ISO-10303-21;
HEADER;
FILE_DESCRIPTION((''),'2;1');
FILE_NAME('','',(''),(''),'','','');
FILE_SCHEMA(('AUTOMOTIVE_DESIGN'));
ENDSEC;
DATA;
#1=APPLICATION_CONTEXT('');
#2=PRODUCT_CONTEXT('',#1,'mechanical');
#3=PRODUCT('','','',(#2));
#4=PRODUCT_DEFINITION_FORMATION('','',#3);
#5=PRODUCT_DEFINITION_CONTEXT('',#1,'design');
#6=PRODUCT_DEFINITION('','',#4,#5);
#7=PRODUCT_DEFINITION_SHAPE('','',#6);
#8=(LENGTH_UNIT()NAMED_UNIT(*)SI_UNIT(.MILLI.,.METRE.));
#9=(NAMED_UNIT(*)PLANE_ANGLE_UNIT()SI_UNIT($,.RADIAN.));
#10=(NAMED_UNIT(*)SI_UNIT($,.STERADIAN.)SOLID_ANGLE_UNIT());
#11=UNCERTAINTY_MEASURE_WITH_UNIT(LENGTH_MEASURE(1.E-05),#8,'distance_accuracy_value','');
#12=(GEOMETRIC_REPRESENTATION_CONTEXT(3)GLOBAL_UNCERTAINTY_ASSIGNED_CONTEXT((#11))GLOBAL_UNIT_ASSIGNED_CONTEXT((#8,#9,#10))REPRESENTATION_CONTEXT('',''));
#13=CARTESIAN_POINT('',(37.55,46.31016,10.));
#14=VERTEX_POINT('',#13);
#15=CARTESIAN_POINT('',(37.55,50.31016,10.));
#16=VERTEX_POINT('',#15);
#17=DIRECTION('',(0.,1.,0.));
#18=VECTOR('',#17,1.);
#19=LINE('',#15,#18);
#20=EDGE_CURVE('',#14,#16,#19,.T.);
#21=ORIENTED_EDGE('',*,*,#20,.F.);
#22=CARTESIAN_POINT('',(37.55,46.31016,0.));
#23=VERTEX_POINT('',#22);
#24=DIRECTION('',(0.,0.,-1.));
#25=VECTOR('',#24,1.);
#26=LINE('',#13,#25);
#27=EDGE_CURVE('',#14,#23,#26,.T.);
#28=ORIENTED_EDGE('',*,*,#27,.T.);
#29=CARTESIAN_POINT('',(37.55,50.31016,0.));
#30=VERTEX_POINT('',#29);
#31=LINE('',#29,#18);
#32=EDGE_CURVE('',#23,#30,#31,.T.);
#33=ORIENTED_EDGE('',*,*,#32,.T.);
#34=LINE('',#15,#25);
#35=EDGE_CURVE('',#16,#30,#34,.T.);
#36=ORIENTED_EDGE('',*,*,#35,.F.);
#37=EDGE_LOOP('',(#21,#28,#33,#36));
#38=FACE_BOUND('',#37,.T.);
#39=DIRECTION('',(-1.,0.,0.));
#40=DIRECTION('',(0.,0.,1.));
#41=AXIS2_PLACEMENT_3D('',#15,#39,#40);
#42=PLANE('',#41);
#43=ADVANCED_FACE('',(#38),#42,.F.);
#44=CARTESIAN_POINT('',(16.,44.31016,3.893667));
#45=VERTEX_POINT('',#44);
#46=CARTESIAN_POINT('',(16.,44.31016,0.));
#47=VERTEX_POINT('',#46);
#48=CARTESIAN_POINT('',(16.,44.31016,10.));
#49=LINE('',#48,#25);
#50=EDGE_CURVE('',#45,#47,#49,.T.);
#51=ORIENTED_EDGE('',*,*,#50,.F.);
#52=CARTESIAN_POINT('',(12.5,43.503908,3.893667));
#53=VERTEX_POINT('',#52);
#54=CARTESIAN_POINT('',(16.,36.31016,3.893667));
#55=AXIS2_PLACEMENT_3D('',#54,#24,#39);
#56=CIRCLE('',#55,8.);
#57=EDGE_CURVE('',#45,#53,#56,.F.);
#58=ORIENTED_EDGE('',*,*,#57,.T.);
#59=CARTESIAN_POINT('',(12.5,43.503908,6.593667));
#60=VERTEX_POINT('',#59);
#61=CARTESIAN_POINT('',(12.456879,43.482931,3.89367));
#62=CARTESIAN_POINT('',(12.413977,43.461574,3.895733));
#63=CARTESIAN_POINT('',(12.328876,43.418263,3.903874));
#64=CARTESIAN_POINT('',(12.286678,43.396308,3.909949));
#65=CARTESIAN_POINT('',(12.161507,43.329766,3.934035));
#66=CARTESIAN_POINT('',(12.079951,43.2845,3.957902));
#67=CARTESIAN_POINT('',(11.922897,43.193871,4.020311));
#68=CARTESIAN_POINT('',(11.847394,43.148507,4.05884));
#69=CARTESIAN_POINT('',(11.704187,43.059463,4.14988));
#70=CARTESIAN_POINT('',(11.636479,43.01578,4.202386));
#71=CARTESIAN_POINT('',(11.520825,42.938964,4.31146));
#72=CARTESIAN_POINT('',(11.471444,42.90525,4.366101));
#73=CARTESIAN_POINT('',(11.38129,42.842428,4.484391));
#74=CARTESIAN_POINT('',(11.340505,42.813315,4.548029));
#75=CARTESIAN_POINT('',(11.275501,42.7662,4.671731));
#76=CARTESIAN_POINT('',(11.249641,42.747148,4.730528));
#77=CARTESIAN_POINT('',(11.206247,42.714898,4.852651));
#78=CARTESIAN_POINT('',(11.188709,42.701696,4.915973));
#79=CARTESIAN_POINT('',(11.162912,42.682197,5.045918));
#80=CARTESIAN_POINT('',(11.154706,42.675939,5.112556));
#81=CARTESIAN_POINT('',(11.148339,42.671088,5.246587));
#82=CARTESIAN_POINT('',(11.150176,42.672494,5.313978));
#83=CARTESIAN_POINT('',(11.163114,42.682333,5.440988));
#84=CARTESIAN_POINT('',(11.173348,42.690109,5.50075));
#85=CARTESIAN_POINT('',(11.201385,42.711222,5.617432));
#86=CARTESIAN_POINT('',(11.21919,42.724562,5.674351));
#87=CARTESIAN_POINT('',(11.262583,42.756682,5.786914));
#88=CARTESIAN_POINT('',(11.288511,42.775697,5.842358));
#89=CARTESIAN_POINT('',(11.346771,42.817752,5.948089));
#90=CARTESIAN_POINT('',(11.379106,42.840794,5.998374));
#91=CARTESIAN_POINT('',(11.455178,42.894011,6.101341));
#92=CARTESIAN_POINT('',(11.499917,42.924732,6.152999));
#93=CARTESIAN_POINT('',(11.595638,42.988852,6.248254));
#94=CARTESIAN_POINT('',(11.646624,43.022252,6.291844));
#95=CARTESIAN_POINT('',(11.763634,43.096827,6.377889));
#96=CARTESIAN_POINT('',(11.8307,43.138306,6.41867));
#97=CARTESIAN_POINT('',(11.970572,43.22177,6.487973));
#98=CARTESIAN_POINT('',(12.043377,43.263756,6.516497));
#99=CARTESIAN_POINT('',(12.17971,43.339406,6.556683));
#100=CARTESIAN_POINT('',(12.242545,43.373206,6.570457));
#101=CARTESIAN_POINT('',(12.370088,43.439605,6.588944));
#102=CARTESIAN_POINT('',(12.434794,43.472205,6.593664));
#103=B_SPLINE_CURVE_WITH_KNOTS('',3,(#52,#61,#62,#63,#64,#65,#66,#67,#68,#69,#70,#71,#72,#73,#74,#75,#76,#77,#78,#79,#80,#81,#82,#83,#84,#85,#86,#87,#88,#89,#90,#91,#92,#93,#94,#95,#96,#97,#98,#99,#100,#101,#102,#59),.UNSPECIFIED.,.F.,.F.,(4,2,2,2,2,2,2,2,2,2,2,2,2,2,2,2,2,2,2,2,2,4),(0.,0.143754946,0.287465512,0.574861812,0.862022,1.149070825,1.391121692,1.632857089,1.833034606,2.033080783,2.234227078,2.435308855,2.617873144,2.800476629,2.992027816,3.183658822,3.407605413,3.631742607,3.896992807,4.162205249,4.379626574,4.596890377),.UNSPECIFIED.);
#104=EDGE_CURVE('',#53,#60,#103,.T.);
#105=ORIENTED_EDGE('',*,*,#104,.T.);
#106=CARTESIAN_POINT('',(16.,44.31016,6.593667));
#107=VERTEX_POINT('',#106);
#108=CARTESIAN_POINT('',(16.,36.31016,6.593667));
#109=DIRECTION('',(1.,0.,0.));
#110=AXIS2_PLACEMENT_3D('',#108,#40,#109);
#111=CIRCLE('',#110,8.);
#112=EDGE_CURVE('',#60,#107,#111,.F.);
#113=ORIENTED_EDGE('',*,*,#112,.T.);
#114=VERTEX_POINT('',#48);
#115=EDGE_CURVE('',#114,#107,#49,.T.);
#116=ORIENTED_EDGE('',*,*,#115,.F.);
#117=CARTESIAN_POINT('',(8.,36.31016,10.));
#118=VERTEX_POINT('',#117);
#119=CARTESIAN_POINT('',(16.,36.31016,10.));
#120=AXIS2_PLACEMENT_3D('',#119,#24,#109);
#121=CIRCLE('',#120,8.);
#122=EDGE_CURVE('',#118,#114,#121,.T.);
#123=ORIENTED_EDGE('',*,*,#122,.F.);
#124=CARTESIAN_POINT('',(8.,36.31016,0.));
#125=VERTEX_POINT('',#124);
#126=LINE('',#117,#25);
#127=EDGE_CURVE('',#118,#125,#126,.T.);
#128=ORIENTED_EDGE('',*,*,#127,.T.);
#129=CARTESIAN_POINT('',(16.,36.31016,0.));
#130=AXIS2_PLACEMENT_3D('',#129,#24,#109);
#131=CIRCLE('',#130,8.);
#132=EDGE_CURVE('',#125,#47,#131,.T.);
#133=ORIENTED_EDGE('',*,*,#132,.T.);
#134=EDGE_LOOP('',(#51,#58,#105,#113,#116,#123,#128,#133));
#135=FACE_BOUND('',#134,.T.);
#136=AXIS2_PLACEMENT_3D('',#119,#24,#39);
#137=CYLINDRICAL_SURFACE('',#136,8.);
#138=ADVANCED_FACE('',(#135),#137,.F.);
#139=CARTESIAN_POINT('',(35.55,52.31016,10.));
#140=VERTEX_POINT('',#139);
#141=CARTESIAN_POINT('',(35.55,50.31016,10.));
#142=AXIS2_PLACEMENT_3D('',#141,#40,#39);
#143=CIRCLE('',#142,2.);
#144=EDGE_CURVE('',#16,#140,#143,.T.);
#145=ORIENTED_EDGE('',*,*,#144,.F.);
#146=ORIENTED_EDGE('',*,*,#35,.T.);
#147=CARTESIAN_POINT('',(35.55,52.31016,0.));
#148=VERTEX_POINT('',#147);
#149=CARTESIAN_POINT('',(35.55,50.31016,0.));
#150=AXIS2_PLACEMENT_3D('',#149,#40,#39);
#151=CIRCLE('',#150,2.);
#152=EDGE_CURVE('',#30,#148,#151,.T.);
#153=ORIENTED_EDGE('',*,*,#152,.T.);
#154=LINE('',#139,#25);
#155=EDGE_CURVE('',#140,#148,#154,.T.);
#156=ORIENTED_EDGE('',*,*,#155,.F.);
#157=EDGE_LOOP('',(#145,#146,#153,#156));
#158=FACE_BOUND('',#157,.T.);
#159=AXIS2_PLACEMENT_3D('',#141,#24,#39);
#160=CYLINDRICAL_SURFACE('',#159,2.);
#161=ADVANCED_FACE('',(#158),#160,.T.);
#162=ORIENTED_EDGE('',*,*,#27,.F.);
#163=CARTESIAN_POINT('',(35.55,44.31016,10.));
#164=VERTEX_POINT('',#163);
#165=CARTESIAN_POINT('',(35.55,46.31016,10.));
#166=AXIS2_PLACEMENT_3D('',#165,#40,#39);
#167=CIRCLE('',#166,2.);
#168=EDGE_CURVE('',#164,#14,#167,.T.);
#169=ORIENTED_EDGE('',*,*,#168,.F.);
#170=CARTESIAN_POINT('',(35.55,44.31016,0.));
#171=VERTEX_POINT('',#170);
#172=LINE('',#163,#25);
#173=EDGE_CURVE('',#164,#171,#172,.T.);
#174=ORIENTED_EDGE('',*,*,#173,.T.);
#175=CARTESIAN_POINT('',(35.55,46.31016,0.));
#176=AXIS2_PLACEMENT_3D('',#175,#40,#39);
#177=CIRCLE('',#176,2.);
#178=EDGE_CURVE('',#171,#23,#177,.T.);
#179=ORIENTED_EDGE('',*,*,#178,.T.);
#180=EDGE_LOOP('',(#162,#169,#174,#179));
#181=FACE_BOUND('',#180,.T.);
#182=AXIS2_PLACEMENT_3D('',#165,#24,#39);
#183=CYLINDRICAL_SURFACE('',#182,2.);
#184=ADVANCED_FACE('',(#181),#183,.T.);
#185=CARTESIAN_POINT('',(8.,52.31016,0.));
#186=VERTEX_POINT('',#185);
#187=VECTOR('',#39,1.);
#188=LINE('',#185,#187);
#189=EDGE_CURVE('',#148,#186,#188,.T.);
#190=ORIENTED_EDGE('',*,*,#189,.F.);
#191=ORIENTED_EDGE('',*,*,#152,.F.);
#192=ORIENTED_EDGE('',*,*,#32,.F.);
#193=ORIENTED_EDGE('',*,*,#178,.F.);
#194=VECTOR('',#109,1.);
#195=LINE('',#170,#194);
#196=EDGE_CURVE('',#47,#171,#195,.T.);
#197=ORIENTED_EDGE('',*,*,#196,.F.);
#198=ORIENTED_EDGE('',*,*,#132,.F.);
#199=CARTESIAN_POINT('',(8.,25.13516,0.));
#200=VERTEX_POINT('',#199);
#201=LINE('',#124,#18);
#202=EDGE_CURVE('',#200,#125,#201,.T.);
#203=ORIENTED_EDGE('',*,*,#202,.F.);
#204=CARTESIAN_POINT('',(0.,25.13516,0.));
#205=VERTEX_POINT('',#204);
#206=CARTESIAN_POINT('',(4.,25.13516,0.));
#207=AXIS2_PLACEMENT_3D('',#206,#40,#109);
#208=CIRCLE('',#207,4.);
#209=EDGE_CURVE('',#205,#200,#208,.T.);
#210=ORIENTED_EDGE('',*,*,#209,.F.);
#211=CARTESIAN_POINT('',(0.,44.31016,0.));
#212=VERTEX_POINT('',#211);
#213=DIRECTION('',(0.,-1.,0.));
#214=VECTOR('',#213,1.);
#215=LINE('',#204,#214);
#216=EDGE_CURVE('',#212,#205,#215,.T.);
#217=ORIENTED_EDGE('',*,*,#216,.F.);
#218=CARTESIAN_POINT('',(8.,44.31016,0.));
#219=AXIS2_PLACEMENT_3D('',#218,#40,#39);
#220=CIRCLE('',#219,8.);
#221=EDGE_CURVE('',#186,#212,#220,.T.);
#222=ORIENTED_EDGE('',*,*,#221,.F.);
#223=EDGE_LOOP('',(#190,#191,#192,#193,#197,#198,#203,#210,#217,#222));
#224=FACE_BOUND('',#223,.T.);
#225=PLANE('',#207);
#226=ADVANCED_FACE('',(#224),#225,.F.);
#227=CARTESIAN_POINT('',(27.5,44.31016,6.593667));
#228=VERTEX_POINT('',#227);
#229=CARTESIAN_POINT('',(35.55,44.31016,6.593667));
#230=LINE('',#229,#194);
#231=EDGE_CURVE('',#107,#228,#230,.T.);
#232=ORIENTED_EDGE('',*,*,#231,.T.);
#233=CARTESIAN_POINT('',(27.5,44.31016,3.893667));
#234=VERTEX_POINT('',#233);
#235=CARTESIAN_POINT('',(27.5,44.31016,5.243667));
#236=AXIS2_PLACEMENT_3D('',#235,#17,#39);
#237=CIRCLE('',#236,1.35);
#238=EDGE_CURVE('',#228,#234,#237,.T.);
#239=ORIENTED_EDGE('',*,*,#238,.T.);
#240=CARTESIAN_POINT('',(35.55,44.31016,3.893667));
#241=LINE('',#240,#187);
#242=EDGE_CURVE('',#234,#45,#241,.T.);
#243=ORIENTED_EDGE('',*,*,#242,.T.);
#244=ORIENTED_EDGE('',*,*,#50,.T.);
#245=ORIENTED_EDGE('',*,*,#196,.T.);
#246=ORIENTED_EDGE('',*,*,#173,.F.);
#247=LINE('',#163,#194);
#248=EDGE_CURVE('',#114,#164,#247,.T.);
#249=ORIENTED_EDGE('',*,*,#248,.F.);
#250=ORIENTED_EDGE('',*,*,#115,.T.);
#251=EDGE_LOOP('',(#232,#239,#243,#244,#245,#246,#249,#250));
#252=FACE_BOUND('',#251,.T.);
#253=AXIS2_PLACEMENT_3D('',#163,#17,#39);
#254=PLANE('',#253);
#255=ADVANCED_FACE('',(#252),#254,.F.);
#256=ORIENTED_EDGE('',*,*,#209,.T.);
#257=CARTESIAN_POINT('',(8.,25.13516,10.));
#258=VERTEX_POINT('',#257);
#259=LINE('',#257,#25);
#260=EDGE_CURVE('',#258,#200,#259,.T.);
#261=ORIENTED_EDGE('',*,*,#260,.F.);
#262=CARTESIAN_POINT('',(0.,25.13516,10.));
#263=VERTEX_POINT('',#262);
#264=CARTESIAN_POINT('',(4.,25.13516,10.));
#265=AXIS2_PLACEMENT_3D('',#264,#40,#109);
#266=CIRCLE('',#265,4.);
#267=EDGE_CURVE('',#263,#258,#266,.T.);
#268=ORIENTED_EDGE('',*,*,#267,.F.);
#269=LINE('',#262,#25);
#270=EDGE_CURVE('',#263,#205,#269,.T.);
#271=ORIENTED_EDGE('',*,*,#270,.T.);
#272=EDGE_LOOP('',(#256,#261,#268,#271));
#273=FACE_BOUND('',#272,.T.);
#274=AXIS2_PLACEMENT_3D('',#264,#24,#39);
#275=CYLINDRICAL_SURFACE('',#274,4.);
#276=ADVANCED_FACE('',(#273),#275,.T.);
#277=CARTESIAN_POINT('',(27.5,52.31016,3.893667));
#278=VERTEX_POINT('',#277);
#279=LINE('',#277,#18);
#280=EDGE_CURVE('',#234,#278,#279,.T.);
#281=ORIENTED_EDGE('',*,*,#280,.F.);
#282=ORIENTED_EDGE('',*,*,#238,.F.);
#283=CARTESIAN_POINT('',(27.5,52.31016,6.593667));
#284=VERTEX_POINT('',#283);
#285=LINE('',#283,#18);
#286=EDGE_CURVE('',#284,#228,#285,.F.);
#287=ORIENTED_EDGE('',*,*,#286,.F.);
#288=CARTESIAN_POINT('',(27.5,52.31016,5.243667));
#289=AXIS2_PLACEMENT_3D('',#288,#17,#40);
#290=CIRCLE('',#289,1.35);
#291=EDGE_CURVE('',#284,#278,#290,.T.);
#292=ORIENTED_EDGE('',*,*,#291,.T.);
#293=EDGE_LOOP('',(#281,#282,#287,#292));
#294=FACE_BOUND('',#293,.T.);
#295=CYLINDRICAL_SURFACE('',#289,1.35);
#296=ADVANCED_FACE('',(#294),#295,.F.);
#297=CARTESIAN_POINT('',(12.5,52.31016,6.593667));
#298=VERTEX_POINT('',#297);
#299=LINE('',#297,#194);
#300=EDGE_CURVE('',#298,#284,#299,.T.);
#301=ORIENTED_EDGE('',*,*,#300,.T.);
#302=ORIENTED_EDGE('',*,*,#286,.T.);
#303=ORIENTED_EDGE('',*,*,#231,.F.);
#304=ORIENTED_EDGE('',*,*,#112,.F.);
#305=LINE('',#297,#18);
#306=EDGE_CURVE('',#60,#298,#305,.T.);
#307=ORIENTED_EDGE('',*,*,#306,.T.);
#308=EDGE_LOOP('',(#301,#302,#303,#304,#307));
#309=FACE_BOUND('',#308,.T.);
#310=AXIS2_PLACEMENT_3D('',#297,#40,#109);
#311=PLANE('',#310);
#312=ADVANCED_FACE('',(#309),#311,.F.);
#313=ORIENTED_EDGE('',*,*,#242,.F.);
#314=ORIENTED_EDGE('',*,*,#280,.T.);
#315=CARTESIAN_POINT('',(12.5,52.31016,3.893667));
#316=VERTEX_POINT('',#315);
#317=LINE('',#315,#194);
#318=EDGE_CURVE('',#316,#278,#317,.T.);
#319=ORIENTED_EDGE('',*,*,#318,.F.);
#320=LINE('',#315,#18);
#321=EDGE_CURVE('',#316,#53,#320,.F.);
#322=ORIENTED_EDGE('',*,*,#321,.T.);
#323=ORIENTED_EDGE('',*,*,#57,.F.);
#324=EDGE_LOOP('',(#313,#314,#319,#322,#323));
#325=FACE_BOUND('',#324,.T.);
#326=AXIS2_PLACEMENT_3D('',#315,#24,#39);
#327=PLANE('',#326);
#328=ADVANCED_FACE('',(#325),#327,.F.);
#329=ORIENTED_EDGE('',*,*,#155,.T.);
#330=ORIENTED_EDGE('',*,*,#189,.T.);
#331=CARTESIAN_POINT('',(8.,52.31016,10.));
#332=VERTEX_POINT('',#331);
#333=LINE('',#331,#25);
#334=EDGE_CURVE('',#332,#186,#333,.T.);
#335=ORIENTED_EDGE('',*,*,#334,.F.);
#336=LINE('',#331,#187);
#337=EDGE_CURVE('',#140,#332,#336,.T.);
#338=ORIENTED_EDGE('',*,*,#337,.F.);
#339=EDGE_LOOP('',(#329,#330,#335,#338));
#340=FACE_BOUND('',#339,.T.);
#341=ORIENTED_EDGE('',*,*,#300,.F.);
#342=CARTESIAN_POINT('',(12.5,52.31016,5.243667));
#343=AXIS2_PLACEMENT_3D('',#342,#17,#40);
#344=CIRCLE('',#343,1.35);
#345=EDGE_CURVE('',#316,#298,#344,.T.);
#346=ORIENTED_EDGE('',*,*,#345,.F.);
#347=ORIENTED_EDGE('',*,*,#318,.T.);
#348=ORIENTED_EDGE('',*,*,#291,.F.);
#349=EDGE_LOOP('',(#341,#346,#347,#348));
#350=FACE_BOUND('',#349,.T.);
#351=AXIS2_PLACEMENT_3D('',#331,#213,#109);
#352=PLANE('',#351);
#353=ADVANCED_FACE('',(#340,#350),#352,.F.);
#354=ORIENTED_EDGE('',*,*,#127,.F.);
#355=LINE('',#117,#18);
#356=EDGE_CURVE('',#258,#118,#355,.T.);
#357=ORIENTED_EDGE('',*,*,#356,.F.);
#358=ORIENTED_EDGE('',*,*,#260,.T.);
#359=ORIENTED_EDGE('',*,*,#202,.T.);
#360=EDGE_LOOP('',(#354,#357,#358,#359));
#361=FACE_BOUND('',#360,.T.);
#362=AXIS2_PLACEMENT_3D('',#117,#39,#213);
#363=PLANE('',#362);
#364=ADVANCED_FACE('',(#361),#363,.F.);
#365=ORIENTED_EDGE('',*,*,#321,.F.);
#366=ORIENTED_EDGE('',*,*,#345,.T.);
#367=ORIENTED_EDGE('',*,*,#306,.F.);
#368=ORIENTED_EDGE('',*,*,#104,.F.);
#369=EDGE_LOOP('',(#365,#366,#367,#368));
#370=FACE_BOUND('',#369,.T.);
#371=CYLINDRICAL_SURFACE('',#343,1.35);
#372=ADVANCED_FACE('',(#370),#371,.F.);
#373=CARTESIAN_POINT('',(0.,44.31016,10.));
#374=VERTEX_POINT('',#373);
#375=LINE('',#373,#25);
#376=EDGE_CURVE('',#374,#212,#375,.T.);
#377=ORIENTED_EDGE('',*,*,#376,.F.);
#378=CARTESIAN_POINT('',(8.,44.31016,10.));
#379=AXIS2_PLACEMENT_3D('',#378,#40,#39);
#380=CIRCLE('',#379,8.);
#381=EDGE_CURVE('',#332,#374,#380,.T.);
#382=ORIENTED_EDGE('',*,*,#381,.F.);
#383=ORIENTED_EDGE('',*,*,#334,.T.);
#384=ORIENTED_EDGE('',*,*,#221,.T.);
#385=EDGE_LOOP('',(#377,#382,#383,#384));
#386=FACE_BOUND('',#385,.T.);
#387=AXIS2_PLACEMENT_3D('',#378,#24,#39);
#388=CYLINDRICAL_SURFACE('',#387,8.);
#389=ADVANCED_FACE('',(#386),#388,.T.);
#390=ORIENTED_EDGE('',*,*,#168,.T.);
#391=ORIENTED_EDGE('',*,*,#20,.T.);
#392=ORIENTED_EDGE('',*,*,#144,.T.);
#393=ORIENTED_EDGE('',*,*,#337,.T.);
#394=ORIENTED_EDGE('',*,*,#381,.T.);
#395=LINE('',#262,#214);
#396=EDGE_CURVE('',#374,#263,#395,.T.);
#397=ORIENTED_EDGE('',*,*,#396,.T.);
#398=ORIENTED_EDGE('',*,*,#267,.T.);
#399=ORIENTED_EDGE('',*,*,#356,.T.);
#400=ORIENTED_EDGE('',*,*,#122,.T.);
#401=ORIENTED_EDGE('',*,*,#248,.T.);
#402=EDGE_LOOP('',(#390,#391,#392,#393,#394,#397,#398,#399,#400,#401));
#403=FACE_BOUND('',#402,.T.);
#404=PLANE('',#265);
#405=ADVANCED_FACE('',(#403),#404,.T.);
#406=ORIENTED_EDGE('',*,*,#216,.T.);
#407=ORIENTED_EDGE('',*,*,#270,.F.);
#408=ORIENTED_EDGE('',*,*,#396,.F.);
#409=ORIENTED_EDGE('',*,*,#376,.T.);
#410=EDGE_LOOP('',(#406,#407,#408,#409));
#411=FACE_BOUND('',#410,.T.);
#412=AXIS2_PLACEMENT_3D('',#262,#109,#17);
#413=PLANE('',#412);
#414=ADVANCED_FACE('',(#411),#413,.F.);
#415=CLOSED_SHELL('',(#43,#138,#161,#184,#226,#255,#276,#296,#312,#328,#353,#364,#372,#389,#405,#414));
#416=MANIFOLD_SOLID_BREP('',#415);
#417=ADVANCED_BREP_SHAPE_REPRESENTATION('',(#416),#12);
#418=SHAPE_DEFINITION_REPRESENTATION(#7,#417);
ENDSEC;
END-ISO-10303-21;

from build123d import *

# Parameters (mm, degrees)
BOSS_EXTRUDE1_DEPTH        = 10
M2_5_START                 = 36.310160318
M2_5_CLEARANCE_SLOT1_DEPTH = 16


with BuildPart() as part:
    # Sketch1 → Boss-Extrude1 (new body)
    with BuildSketch(Plane.XY):
        with BuildLine():
            Line((0, 25.135160318), (0, 44.310160318))
            ThreePointArc((0, 44.310160318), (2.343145751, 49.967014567), (8, 52.310160318))
            Line((8, 52.310160318), (35.55, 52.310160318))
            ThreePointArc((35.55, 52.310160318), (36.964213562, 51.72437388), (37.55, 50.310160318))
            Line((37.55, 50.310160318), (37.55, 46.310160318))
            ThreePointArc((37.55, 46.310160318), (36.964213562, 44.895946756), (35.55, 44.310160318))
            Line((35.55, 44.310160318), (16, 44.310160318))
            ThreePointArc((16, 44.310160318), (10.343145751, 41.967014567), (8, 36.310160318))
            Line((8, 36.310160318), (8, 25.135160318))
            ThreePointArc((8, 25.135160318), (4, 21.135160318), (0, 25.135160318))
        make_face()
    extrude(amount=BOSS_EXTRUDE1_DEPTH)

    # M2.5 Clearance Slot1: read off the stored shape, not the designer's step
    # M2.5 Clearance Slot1 outline → M2.5 Clearance Slot1 (cut)
    with BuildSketch(Plane(origin=(0, 0, 0), x_dir=(1, 0, 0), z_dir=(0, 1, 0)).offset(M2_5_START)):
        with BuildLine():
            Line((12.5, -6.593666906), (27.5, -6.593666906))
            ThreePointArc((27.5, -6.593666906), (28.85, -5.243666906), (27.5, -3.893666906))
            Line((27.5, -3.893666906), (12.5, -3.893666906))
            ThreePointArc((12.5, -3.893666906), (11.15, -5.243666906), (12.5, -6.593666906))
        make_face()
    extrude(amount=M2_5_CLEARANCE_SLOT1_DEPTH, mode=Mode.SUBTRACT)


solid = part.part
